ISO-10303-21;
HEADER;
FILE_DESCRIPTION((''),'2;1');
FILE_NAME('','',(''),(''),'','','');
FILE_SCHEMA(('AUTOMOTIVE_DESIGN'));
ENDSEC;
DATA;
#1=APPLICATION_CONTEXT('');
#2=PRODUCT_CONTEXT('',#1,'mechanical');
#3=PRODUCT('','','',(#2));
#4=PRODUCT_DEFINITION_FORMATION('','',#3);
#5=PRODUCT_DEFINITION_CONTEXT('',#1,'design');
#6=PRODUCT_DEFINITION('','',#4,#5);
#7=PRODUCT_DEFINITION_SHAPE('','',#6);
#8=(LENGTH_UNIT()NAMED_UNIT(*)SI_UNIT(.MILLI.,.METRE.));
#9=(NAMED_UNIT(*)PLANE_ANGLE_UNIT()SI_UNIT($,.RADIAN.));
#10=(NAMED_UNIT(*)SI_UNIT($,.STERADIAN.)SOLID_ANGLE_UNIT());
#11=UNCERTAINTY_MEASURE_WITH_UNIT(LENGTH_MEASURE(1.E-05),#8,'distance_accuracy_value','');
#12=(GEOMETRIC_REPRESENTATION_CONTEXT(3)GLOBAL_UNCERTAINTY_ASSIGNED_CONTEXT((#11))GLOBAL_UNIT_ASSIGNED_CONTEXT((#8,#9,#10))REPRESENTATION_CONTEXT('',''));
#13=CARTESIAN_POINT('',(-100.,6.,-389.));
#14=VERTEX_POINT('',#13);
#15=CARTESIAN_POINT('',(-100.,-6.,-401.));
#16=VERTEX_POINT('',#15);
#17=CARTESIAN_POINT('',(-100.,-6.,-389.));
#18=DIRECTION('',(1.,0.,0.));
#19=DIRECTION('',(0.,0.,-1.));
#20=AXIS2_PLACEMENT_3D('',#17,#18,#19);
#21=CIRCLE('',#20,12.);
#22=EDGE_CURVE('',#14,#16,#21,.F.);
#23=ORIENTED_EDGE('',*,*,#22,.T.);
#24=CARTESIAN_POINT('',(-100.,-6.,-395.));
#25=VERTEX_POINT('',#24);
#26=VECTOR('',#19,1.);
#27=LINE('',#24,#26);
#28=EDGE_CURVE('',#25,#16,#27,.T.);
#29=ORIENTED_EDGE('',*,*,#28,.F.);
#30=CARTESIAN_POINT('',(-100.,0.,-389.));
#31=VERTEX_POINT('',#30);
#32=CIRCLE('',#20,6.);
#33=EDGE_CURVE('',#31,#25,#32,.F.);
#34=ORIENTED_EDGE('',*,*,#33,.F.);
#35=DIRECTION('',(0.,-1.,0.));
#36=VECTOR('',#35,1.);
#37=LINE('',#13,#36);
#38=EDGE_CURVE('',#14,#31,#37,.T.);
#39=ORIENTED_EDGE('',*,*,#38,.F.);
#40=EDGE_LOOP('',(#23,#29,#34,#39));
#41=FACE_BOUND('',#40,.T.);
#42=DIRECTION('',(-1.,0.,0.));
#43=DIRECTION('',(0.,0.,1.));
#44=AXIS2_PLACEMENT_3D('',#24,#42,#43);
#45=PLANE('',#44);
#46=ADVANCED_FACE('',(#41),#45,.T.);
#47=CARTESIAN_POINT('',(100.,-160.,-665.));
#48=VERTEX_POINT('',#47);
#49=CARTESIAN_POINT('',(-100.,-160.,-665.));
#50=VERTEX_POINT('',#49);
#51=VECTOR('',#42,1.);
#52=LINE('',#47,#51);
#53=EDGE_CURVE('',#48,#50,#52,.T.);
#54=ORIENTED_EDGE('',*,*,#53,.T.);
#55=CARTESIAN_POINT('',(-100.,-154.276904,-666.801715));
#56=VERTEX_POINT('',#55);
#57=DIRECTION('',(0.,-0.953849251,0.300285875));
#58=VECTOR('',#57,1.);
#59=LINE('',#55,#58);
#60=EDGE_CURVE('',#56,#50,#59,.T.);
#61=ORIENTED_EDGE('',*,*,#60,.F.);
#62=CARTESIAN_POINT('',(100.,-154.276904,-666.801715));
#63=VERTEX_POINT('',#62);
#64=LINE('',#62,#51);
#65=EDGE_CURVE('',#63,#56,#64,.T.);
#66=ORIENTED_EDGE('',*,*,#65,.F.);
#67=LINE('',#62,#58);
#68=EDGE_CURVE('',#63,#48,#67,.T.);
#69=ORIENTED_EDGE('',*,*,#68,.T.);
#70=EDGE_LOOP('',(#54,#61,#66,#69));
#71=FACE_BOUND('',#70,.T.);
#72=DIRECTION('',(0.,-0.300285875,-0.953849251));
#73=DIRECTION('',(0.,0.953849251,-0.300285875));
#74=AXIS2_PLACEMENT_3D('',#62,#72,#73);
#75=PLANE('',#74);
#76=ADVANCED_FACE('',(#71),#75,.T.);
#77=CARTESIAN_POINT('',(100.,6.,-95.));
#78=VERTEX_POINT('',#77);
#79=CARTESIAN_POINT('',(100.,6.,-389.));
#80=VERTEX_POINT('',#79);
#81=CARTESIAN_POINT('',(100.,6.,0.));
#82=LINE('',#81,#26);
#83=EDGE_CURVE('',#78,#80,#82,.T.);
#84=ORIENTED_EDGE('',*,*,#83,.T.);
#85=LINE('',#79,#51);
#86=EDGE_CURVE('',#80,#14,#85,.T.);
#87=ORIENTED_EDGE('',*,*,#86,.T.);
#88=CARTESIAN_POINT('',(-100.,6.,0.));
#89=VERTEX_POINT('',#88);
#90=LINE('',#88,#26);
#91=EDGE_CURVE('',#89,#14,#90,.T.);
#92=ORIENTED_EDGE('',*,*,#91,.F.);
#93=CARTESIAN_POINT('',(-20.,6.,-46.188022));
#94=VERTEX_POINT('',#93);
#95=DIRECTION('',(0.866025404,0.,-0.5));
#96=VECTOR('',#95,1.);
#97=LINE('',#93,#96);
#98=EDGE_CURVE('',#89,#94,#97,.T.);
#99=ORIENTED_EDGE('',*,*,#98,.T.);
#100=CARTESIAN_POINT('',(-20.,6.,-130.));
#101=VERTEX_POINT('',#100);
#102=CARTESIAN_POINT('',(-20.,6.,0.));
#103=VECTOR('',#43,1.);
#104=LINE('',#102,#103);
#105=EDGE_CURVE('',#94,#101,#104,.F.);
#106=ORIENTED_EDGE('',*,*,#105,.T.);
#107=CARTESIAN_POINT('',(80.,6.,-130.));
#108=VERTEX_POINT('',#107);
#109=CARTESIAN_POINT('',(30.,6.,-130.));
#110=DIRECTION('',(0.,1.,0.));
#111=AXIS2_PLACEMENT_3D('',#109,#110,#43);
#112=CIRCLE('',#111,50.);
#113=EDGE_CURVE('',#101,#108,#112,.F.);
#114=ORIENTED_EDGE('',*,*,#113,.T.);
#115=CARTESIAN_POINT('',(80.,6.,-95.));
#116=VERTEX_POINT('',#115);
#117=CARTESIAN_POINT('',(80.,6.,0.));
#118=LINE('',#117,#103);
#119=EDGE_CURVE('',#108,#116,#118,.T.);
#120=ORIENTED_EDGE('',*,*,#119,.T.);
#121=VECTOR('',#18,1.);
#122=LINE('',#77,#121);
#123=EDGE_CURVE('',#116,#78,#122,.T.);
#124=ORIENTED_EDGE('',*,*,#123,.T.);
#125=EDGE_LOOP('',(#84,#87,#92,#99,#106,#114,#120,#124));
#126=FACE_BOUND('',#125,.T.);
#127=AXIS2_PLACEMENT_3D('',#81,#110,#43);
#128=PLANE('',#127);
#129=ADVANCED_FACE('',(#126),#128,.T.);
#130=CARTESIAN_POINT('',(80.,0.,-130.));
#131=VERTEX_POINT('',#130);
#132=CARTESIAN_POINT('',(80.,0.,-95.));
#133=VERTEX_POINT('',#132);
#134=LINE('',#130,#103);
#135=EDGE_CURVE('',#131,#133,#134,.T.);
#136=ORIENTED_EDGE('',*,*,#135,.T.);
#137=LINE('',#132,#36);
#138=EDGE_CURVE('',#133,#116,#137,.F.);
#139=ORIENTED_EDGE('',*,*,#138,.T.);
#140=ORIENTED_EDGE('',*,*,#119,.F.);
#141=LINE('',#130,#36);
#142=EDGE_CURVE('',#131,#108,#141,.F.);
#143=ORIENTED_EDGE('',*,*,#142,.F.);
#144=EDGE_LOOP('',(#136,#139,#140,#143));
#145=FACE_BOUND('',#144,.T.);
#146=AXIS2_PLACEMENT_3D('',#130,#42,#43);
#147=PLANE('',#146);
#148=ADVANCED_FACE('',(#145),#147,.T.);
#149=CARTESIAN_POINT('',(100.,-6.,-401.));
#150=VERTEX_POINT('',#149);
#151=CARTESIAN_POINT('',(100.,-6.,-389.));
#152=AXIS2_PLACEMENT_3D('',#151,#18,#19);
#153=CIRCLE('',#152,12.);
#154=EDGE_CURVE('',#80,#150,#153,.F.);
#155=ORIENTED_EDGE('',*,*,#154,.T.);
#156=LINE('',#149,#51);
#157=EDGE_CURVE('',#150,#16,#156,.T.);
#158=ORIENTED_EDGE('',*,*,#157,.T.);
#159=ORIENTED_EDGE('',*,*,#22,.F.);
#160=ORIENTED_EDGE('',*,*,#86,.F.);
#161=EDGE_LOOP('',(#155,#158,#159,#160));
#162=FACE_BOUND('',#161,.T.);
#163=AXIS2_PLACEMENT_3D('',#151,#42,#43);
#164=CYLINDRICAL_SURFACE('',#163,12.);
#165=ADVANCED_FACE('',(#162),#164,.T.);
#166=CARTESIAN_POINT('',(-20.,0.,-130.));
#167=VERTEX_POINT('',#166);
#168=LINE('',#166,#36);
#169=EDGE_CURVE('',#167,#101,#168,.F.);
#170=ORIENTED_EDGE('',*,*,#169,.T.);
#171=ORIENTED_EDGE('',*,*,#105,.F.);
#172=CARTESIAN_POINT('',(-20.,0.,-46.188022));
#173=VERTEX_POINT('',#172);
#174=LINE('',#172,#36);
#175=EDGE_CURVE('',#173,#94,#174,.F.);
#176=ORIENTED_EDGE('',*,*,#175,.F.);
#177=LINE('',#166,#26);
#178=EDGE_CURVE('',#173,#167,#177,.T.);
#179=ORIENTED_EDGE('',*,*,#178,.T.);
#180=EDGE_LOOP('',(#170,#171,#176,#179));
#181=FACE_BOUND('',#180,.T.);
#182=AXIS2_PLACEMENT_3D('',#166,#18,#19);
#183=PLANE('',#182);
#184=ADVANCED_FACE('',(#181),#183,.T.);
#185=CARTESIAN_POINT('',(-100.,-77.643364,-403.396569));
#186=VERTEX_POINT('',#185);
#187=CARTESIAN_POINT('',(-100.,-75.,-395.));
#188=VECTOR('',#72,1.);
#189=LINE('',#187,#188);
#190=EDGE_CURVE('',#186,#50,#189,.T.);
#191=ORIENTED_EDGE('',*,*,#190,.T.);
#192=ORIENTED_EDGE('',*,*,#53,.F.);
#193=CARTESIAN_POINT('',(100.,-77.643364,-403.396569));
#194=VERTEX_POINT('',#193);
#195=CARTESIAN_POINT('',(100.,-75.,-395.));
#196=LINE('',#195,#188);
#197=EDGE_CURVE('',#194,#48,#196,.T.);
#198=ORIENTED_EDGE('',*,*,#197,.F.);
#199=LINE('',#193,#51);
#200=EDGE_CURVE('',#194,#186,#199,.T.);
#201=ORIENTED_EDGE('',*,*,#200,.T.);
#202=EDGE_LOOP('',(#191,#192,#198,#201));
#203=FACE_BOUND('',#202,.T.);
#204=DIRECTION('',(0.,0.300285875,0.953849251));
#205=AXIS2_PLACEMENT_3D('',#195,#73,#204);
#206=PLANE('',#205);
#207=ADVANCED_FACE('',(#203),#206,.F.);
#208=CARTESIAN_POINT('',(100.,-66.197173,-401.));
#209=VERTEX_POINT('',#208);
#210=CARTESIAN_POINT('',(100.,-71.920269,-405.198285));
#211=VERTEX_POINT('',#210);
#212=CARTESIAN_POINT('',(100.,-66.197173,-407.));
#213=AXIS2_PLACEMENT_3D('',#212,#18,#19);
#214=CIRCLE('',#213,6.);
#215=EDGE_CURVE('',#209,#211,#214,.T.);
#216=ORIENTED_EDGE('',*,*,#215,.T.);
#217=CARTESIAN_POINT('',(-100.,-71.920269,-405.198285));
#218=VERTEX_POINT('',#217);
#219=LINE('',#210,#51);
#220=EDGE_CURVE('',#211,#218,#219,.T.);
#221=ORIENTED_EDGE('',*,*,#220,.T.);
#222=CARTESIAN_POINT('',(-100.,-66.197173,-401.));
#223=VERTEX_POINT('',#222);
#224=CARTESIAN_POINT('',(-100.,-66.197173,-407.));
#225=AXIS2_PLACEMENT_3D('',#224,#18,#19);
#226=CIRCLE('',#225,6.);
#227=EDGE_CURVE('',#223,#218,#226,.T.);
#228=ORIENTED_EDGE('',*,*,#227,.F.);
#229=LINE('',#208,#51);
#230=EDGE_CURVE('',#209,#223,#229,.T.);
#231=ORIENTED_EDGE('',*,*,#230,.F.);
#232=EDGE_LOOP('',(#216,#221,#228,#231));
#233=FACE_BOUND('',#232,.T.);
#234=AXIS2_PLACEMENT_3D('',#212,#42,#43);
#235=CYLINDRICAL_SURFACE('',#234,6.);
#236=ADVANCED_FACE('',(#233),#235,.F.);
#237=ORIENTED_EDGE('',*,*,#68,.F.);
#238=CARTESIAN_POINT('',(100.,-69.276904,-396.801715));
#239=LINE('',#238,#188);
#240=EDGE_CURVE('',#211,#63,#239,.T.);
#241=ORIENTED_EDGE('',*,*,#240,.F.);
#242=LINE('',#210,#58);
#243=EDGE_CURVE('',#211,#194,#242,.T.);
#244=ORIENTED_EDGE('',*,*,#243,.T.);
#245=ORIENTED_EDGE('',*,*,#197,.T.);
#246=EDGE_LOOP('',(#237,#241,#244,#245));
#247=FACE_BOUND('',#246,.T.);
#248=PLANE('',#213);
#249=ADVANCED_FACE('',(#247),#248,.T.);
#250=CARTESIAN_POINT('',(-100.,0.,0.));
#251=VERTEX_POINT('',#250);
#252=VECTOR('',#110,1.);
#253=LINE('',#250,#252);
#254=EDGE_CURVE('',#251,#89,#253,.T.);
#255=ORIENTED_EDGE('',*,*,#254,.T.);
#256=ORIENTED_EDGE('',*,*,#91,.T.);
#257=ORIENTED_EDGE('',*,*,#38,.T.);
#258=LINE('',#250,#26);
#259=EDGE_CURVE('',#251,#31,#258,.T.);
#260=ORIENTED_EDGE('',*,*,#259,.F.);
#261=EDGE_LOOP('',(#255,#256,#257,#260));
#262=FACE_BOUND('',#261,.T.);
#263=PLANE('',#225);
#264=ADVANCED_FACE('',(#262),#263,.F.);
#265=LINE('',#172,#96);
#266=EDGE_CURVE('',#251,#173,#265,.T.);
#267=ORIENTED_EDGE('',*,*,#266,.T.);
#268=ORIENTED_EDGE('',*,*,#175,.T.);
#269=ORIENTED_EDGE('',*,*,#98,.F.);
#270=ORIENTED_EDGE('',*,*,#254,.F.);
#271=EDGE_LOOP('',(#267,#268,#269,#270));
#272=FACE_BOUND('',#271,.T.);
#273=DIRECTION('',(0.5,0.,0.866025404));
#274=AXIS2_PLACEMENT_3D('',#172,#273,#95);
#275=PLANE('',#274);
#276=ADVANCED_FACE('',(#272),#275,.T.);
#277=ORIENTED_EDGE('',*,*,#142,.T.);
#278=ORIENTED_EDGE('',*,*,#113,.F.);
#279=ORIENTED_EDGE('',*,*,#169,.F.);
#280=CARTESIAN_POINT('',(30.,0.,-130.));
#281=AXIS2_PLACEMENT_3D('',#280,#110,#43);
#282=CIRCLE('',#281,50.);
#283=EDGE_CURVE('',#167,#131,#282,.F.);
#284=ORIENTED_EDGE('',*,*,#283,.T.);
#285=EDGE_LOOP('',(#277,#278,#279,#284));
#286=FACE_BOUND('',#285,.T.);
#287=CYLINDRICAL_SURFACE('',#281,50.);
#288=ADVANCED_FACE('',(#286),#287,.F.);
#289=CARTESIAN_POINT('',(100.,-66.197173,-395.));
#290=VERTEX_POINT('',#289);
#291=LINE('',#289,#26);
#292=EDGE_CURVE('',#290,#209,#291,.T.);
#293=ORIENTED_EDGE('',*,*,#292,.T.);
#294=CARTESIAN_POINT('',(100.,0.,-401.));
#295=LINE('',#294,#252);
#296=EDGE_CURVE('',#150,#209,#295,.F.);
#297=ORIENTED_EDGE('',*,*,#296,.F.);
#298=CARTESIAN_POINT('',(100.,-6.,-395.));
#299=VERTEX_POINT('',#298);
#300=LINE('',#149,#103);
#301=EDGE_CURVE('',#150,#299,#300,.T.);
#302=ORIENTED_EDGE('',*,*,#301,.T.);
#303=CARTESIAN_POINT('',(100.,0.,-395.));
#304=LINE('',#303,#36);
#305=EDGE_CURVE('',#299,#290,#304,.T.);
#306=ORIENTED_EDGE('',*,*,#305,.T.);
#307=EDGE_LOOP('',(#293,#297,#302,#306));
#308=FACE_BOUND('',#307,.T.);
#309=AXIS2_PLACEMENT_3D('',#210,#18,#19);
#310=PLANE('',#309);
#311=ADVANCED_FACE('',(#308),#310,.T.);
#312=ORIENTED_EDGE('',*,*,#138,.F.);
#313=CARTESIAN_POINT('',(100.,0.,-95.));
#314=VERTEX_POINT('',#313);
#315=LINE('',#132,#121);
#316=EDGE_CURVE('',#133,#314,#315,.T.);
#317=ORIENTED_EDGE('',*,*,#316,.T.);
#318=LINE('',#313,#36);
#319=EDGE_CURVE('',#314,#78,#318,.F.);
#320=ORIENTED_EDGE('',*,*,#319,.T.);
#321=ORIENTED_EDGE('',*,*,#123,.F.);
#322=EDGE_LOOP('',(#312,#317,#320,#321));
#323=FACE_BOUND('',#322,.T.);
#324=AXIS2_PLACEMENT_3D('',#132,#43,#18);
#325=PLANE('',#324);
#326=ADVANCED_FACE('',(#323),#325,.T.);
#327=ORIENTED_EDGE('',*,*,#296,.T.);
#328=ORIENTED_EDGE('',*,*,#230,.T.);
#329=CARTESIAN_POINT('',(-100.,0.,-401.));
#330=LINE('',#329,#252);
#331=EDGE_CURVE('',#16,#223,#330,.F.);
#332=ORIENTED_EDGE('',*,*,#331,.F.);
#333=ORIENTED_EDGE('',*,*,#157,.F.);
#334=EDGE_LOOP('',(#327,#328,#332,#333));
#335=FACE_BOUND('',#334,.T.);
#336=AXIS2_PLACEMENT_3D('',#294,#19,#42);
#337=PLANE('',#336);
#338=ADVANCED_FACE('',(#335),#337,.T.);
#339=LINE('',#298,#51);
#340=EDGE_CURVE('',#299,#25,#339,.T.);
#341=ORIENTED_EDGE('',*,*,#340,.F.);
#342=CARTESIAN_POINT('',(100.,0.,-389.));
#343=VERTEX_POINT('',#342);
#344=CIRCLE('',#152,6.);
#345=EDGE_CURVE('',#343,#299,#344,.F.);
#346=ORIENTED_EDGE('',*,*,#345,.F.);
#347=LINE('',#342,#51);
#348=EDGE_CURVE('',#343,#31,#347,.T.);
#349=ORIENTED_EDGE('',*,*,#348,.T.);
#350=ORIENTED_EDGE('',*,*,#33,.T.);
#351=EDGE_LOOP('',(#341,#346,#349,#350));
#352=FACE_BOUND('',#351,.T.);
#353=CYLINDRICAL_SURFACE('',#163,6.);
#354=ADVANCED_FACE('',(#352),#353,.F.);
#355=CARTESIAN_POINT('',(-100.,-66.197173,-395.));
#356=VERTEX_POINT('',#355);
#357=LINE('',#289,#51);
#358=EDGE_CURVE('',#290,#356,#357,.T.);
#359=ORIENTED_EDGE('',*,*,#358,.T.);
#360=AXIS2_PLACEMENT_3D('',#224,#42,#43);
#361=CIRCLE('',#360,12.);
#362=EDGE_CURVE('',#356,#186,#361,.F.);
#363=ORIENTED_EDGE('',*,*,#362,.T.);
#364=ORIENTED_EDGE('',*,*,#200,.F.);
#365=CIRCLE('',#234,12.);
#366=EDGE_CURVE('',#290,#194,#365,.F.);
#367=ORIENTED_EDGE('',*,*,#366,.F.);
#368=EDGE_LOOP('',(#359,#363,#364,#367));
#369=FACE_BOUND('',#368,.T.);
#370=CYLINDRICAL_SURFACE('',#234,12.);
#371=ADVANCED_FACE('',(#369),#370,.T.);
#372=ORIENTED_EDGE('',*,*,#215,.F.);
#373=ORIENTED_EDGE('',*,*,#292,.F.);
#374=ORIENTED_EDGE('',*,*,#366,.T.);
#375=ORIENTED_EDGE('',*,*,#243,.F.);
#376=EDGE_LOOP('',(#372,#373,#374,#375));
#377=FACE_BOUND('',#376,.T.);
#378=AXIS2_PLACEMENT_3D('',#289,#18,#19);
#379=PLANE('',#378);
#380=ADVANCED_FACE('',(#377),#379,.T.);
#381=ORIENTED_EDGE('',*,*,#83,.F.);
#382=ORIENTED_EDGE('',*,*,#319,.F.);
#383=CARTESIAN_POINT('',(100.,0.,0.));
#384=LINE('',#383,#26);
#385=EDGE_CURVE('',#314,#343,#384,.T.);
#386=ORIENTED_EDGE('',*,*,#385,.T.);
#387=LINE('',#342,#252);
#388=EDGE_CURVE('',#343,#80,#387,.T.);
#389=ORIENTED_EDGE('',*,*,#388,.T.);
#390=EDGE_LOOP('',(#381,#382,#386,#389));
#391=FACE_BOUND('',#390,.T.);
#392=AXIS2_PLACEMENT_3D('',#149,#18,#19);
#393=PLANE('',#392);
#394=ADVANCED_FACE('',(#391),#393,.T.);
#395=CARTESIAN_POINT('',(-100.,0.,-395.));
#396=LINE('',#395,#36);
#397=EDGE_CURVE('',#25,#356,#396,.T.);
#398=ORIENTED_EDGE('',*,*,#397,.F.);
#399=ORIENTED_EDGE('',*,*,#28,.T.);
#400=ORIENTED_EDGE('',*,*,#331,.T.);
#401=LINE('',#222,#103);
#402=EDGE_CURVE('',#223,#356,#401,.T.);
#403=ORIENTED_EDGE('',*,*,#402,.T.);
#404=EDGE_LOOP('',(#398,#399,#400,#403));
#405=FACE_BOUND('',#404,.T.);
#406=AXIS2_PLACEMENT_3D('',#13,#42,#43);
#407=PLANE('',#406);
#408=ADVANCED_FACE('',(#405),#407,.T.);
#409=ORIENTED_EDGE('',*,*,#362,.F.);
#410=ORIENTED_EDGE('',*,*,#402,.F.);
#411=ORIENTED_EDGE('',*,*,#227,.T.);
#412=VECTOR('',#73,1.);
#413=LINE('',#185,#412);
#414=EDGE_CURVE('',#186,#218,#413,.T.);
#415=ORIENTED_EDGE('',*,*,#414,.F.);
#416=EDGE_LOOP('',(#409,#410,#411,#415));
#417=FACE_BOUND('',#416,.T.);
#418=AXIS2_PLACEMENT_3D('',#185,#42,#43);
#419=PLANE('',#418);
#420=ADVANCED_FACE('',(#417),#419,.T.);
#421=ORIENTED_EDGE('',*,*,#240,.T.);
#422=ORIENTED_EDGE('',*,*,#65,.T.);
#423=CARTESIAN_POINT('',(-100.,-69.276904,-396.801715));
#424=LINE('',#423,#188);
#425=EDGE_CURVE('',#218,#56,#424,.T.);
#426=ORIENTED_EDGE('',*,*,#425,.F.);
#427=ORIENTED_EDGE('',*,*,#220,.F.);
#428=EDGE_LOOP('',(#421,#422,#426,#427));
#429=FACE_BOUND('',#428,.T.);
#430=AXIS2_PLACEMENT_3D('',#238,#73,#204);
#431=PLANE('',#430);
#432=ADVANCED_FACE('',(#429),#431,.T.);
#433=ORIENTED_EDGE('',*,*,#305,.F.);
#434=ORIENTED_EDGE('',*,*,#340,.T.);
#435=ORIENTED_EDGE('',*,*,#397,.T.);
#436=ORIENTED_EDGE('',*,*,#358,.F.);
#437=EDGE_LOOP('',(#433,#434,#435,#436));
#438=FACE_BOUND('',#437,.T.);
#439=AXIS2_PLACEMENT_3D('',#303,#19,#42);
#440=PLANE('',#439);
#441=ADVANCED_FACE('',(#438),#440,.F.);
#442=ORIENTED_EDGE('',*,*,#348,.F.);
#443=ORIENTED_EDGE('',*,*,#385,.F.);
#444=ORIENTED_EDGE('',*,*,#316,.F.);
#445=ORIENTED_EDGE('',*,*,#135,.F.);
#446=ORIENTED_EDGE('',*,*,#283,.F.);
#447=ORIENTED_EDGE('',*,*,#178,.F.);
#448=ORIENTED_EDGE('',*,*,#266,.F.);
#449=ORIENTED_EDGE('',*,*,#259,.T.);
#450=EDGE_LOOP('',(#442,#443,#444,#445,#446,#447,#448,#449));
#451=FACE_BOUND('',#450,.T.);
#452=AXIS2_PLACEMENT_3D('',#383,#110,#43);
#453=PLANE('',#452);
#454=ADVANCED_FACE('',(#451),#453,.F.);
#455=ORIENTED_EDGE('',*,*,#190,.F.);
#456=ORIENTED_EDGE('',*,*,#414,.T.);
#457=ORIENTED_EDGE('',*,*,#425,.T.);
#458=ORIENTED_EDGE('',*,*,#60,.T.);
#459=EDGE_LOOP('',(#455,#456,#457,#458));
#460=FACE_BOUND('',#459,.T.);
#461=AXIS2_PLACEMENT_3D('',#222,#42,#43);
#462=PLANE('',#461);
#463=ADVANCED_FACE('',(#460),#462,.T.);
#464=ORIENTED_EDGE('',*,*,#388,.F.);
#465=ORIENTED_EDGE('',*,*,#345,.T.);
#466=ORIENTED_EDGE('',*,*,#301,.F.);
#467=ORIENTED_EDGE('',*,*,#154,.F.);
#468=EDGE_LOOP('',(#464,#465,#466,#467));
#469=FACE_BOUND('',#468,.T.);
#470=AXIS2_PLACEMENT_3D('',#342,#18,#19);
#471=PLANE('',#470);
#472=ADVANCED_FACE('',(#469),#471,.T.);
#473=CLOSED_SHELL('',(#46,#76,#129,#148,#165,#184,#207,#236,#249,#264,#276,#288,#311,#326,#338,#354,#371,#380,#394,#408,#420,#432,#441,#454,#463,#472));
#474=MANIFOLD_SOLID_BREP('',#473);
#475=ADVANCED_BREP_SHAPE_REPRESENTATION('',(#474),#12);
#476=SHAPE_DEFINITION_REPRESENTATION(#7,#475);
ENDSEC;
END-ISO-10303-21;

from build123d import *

# Parameters (mm, degrees)
SM_BASE_FLANGE_1_DEPTH = 100
CUT_EXTRUDE_1_REACH    = 696.392


# Sheet-metal steps are written as plain solids
with BuildPart() as part:
    # Sketch 1 → 基体-法兰1 (new, symmetric)
    with BuildSketch(Plane(origin=(0, 0, 0), x_dir=(0, 0, -1), z_dir=(1, 0, 0))):
        with BuildLine():
            Line((0, 0), (389, 0))
            ThreePointArc((389, 0), (393.242640687, -1.757359313), (395, -6))
            Line((395, -6), (395, -66.197173462))
            ThreePointArc((395, -66.197173462), (397.324227007, -73.295019402), (403.396569497, -77.643364471))
            Line((403.396569497, -77.643364471), (665, -160))
            Line((665, -160), (666.801715251, -154.276904496))
            Line((666.801715251, -154.276904496), (405.198284749, -71.920268967))
            ThreePointArc((405.198284749, -71.920268967), (402.162113503, -69.746096432), (401, -66.197173462))
            Line((401, -66.197173462), (401, -6))
            ThreePointArc((401, -6), (397.485281374, 2.485281374), (389, 6))
            Line((389, 6), (0, 6))
            Line((0, 6), (0, 0))
        make_face()
    extrude(amount=SM_BASE_FLANGE_1_DEPTH, both=True)

    # 草图4 → 切除-拉伸1 (cut, up to next)
    with BuildSketch(Plane(origin=(0, 6, 0), x_dir=(1, 0, 0), z_dir=(0, 1, 0)), mode=Mode.PRIVATE) as cut_extrude_1_sk1:
        with BuildLine():
            Line((-20, 130), (-20, 46.188021535))
            Line((-20, 46.188021535), (-100, 0))
            Line((-100, 0), (100, 0))
            Line((100, 0), (100, 95))
            Line((100, 95), (80, 95))
            Line((80, 95), (80, 130))
            ThreePointArc((80, 130), (30, 180), (-20, 130))
        make_face()
    cut_extrude_1_tool1 = extrude(cut_extrude_1_sk1.sketch, amount=-CUT_EXTRUDE_1_REACH, mode=Mode.PRIVATE) & part.part
    add(cut_extrude_1_tool1.solids().sort_by_distance((28.66293, 6, -75.336076))[0], mode=Mode.SUBTRACT)


solid = part.part
